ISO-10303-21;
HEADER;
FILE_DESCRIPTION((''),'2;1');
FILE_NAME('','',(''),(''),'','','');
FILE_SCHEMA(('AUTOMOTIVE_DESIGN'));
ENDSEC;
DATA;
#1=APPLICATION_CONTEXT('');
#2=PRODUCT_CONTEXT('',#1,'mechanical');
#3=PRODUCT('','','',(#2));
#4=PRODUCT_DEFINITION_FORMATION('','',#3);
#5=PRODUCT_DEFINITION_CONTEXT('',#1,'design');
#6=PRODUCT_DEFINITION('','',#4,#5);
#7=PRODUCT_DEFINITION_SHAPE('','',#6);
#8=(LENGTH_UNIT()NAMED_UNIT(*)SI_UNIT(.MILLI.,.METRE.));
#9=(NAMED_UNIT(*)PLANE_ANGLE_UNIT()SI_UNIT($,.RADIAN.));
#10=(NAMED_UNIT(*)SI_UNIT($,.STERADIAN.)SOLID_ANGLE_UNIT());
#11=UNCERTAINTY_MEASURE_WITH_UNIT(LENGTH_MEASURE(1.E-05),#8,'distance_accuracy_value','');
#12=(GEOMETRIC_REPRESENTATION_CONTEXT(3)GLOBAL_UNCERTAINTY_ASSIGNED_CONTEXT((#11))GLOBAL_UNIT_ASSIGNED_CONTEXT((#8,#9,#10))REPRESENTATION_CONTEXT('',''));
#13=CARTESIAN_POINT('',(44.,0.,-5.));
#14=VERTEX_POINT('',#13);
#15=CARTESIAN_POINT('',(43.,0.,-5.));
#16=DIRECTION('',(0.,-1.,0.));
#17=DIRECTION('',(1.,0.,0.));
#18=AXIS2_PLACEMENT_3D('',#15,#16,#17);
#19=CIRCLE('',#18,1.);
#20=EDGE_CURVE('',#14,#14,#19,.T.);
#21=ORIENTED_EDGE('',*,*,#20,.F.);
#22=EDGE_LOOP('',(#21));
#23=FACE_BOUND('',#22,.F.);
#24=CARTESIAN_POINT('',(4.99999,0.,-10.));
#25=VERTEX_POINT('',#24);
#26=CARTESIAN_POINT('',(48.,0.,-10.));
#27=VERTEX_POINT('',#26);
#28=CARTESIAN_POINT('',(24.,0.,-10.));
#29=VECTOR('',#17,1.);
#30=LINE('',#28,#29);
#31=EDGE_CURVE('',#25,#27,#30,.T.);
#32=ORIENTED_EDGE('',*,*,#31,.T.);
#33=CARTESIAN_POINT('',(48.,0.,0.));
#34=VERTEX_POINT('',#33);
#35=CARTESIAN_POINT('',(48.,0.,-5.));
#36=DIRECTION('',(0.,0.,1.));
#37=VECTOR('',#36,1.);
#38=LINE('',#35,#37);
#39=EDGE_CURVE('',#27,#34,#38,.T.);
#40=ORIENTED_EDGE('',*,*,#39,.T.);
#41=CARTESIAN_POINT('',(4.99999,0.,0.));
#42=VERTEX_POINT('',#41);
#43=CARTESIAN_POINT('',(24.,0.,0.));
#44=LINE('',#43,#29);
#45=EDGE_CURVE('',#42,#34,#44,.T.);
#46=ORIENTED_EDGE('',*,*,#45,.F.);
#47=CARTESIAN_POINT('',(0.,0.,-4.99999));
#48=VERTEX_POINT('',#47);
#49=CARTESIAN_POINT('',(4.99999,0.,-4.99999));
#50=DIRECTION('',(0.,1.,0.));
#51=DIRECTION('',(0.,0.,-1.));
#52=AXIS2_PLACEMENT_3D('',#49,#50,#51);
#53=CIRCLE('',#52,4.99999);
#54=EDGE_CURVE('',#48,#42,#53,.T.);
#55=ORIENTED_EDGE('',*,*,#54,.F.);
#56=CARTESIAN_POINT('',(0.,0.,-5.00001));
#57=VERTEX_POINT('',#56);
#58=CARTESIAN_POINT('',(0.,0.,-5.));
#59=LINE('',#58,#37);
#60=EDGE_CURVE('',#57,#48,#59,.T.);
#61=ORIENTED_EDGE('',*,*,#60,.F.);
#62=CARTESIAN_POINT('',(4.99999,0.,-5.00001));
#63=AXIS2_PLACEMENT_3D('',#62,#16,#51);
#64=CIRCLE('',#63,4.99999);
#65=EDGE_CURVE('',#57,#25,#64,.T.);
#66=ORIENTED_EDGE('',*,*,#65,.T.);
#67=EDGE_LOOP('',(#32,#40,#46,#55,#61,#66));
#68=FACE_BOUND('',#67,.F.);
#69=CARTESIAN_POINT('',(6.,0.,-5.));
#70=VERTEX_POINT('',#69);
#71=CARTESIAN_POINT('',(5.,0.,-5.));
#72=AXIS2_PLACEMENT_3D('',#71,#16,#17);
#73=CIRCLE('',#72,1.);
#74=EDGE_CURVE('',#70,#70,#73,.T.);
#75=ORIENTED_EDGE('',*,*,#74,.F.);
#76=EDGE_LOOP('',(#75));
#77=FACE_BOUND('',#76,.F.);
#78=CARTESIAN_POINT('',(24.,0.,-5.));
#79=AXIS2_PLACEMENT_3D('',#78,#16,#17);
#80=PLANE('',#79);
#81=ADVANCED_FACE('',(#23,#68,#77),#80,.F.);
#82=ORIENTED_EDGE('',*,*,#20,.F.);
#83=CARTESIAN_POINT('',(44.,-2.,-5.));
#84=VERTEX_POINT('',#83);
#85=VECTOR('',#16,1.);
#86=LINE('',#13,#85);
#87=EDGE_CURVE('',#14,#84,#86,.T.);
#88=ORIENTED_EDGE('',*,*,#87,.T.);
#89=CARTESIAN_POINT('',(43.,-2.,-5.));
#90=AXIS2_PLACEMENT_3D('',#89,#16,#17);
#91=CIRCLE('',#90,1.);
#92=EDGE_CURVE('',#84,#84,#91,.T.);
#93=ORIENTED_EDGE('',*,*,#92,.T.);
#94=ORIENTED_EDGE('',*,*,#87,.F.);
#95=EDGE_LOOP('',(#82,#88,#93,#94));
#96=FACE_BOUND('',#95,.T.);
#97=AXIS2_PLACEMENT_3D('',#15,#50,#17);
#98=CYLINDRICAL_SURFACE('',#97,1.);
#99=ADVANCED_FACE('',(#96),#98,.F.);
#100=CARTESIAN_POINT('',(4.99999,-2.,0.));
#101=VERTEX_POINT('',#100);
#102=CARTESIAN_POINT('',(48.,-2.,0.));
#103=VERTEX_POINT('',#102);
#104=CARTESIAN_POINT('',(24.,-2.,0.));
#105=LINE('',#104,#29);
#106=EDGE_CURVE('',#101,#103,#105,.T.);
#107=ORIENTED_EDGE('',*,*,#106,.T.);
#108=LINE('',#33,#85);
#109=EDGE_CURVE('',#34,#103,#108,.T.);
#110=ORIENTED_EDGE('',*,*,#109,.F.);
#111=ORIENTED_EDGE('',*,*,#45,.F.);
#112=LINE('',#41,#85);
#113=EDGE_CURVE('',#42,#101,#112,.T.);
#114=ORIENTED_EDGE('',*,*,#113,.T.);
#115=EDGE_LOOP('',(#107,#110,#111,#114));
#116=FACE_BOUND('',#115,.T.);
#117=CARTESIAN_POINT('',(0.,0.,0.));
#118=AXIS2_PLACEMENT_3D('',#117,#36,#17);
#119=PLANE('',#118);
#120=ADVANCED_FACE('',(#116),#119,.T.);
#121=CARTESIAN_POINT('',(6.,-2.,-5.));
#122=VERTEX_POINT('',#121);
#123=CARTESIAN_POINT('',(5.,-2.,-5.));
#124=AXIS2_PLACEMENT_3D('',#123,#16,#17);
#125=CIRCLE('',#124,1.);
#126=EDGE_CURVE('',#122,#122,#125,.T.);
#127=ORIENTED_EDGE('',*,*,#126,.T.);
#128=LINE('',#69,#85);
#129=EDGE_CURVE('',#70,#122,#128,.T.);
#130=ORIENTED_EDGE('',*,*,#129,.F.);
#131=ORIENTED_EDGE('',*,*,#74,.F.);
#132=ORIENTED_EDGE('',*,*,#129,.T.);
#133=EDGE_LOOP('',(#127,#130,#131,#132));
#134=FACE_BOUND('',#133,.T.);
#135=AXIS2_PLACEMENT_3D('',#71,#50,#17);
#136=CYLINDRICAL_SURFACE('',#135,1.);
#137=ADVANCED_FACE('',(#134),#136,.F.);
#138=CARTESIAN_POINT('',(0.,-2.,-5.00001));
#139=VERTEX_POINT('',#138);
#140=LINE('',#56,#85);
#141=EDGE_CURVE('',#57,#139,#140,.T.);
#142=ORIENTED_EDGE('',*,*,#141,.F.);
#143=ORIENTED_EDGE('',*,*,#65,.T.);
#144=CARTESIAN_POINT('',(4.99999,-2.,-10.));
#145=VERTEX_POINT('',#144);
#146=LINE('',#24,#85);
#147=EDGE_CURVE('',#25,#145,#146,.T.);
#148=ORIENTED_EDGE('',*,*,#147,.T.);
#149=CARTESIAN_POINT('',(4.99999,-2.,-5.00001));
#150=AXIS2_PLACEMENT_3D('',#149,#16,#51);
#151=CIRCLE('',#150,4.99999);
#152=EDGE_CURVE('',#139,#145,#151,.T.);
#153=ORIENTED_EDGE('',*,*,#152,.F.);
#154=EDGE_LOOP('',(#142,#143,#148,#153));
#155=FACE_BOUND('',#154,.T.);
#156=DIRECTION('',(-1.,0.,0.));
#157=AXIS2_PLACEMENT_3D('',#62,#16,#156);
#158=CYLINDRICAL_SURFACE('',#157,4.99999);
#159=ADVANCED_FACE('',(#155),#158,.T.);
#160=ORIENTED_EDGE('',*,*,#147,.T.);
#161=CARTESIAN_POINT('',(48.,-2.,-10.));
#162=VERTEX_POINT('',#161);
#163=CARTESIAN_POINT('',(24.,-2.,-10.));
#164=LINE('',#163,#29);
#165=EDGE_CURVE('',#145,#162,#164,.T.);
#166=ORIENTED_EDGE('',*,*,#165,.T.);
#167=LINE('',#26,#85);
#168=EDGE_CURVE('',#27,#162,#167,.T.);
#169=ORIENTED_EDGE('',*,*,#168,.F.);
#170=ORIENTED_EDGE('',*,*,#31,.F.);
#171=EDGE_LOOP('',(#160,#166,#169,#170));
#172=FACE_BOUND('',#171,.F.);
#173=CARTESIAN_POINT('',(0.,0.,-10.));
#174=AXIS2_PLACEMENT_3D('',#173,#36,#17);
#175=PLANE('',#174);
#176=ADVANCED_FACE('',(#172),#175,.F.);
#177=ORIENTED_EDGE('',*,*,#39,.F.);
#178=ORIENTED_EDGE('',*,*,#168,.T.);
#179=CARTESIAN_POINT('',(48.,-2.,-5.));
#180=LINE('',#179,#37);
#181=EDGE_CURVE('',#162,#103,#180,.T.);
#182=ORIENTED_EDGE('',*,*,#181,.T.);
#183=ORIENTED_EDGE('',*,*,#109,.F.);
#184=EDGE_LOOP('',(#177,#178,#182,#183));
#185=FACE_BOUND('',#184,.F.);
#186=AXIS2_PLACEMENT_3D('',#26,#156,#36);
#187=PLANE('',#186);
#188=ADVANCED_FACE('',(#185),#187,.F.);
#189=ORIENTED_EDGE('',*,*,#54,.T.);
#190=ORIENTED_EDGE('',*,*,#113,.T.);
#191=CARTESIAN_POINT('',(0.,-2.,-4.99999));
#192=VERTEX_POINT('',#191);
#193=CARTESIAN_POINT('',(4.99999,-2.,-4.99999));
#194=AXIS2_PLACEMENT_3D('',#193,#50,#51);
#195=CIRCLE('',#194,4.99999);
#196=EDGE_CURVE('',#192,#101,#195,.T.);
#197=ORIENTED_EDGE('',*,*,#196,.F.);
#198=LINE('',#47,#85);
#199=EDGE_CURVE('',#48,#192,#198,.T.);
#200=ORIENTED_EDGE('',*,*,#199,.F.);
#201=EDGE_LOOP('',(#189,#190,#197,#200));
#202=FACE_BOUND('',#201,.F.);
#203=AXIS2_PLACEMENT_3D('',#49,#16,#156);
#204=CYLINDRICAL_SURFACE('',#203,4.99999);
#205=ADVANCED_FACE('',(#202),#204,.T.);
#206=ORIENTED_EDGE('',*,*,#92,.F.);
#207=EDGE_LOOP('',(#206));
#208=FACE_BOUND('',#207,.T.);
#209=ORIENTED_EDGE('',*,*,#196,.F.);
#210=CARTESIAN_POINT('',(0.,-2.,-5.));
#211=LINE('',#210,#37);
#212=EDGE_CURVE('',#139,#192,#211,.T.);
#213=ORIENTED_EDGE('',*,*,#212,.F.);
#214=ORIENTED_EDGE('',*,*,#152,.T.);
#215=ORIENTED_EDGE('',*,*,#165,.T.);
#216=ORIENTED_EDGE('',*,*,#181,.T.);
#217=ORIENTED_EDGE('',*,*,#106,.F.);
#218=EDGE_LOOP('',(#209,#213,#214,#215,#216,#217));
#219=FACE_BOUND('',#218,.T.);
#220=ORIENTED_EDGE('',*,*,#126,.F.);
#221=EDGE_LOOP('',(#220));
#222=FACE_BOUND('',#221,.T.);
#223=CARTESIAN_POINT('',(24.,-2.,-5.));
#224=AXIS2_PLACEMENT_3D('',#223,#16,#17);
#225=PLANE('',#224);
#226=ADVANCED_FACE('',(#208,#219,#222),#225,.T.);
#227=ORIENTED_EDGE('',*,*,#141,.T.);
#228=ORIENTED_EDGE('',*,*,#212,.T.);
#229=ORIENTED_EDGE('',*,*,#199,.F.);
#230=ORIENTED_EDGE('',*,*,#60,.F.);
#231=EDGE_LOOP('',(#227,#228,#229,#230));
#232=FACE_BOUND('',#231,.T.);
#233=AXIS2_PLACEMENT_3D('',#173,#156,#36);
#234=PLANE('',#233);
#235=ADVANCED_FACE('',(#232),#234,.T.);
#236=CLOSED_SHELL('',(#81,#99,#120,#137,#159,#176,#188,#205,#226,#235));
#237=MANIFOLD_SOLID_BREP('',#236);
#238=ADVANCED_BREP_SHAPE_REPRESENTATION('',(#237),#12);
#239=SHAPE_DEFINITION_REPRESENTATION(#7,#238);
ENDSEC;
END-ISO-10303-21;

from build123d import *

# Parameters (mm, degrees)
F0_W     = 48
F0_H     = 10
F0_R     = 1
F1_DEPTH = 2
F2_R     = 4.99999


# Not quite as in the source:
# - a fillet or chamfer is up to 0.001 mm smaller than in the source, because OpenCascade refuses the exact size


with BuildPart() as f1:
    # F0 (on Front) → F1 (new body)
    with BuildSketch(Plane.XZ):
        with Locations((24, -5)):
            Rectangle(F0_W, F0_H)
        with Locations((5, -5)):
            Circle(F0_R, mode=Mode.SUBTRACT)
        with Locations((43, -5)):
            Circle(F0_R, mode=Mode.SUBTRACT)
    extrude(amount=F1_DEPTH)

    # F2 (radius 5 in the source; OpenCascade refuses exactly that, so slightly less here)
    f2_edges = [f1.edges().sort_by_distance(p)[0] for p in [
        (0, -1, 0),
        (0, -1, -10),
    ]]
    fillet(f2_edges, radius=F2_R)


solid = f1.part
